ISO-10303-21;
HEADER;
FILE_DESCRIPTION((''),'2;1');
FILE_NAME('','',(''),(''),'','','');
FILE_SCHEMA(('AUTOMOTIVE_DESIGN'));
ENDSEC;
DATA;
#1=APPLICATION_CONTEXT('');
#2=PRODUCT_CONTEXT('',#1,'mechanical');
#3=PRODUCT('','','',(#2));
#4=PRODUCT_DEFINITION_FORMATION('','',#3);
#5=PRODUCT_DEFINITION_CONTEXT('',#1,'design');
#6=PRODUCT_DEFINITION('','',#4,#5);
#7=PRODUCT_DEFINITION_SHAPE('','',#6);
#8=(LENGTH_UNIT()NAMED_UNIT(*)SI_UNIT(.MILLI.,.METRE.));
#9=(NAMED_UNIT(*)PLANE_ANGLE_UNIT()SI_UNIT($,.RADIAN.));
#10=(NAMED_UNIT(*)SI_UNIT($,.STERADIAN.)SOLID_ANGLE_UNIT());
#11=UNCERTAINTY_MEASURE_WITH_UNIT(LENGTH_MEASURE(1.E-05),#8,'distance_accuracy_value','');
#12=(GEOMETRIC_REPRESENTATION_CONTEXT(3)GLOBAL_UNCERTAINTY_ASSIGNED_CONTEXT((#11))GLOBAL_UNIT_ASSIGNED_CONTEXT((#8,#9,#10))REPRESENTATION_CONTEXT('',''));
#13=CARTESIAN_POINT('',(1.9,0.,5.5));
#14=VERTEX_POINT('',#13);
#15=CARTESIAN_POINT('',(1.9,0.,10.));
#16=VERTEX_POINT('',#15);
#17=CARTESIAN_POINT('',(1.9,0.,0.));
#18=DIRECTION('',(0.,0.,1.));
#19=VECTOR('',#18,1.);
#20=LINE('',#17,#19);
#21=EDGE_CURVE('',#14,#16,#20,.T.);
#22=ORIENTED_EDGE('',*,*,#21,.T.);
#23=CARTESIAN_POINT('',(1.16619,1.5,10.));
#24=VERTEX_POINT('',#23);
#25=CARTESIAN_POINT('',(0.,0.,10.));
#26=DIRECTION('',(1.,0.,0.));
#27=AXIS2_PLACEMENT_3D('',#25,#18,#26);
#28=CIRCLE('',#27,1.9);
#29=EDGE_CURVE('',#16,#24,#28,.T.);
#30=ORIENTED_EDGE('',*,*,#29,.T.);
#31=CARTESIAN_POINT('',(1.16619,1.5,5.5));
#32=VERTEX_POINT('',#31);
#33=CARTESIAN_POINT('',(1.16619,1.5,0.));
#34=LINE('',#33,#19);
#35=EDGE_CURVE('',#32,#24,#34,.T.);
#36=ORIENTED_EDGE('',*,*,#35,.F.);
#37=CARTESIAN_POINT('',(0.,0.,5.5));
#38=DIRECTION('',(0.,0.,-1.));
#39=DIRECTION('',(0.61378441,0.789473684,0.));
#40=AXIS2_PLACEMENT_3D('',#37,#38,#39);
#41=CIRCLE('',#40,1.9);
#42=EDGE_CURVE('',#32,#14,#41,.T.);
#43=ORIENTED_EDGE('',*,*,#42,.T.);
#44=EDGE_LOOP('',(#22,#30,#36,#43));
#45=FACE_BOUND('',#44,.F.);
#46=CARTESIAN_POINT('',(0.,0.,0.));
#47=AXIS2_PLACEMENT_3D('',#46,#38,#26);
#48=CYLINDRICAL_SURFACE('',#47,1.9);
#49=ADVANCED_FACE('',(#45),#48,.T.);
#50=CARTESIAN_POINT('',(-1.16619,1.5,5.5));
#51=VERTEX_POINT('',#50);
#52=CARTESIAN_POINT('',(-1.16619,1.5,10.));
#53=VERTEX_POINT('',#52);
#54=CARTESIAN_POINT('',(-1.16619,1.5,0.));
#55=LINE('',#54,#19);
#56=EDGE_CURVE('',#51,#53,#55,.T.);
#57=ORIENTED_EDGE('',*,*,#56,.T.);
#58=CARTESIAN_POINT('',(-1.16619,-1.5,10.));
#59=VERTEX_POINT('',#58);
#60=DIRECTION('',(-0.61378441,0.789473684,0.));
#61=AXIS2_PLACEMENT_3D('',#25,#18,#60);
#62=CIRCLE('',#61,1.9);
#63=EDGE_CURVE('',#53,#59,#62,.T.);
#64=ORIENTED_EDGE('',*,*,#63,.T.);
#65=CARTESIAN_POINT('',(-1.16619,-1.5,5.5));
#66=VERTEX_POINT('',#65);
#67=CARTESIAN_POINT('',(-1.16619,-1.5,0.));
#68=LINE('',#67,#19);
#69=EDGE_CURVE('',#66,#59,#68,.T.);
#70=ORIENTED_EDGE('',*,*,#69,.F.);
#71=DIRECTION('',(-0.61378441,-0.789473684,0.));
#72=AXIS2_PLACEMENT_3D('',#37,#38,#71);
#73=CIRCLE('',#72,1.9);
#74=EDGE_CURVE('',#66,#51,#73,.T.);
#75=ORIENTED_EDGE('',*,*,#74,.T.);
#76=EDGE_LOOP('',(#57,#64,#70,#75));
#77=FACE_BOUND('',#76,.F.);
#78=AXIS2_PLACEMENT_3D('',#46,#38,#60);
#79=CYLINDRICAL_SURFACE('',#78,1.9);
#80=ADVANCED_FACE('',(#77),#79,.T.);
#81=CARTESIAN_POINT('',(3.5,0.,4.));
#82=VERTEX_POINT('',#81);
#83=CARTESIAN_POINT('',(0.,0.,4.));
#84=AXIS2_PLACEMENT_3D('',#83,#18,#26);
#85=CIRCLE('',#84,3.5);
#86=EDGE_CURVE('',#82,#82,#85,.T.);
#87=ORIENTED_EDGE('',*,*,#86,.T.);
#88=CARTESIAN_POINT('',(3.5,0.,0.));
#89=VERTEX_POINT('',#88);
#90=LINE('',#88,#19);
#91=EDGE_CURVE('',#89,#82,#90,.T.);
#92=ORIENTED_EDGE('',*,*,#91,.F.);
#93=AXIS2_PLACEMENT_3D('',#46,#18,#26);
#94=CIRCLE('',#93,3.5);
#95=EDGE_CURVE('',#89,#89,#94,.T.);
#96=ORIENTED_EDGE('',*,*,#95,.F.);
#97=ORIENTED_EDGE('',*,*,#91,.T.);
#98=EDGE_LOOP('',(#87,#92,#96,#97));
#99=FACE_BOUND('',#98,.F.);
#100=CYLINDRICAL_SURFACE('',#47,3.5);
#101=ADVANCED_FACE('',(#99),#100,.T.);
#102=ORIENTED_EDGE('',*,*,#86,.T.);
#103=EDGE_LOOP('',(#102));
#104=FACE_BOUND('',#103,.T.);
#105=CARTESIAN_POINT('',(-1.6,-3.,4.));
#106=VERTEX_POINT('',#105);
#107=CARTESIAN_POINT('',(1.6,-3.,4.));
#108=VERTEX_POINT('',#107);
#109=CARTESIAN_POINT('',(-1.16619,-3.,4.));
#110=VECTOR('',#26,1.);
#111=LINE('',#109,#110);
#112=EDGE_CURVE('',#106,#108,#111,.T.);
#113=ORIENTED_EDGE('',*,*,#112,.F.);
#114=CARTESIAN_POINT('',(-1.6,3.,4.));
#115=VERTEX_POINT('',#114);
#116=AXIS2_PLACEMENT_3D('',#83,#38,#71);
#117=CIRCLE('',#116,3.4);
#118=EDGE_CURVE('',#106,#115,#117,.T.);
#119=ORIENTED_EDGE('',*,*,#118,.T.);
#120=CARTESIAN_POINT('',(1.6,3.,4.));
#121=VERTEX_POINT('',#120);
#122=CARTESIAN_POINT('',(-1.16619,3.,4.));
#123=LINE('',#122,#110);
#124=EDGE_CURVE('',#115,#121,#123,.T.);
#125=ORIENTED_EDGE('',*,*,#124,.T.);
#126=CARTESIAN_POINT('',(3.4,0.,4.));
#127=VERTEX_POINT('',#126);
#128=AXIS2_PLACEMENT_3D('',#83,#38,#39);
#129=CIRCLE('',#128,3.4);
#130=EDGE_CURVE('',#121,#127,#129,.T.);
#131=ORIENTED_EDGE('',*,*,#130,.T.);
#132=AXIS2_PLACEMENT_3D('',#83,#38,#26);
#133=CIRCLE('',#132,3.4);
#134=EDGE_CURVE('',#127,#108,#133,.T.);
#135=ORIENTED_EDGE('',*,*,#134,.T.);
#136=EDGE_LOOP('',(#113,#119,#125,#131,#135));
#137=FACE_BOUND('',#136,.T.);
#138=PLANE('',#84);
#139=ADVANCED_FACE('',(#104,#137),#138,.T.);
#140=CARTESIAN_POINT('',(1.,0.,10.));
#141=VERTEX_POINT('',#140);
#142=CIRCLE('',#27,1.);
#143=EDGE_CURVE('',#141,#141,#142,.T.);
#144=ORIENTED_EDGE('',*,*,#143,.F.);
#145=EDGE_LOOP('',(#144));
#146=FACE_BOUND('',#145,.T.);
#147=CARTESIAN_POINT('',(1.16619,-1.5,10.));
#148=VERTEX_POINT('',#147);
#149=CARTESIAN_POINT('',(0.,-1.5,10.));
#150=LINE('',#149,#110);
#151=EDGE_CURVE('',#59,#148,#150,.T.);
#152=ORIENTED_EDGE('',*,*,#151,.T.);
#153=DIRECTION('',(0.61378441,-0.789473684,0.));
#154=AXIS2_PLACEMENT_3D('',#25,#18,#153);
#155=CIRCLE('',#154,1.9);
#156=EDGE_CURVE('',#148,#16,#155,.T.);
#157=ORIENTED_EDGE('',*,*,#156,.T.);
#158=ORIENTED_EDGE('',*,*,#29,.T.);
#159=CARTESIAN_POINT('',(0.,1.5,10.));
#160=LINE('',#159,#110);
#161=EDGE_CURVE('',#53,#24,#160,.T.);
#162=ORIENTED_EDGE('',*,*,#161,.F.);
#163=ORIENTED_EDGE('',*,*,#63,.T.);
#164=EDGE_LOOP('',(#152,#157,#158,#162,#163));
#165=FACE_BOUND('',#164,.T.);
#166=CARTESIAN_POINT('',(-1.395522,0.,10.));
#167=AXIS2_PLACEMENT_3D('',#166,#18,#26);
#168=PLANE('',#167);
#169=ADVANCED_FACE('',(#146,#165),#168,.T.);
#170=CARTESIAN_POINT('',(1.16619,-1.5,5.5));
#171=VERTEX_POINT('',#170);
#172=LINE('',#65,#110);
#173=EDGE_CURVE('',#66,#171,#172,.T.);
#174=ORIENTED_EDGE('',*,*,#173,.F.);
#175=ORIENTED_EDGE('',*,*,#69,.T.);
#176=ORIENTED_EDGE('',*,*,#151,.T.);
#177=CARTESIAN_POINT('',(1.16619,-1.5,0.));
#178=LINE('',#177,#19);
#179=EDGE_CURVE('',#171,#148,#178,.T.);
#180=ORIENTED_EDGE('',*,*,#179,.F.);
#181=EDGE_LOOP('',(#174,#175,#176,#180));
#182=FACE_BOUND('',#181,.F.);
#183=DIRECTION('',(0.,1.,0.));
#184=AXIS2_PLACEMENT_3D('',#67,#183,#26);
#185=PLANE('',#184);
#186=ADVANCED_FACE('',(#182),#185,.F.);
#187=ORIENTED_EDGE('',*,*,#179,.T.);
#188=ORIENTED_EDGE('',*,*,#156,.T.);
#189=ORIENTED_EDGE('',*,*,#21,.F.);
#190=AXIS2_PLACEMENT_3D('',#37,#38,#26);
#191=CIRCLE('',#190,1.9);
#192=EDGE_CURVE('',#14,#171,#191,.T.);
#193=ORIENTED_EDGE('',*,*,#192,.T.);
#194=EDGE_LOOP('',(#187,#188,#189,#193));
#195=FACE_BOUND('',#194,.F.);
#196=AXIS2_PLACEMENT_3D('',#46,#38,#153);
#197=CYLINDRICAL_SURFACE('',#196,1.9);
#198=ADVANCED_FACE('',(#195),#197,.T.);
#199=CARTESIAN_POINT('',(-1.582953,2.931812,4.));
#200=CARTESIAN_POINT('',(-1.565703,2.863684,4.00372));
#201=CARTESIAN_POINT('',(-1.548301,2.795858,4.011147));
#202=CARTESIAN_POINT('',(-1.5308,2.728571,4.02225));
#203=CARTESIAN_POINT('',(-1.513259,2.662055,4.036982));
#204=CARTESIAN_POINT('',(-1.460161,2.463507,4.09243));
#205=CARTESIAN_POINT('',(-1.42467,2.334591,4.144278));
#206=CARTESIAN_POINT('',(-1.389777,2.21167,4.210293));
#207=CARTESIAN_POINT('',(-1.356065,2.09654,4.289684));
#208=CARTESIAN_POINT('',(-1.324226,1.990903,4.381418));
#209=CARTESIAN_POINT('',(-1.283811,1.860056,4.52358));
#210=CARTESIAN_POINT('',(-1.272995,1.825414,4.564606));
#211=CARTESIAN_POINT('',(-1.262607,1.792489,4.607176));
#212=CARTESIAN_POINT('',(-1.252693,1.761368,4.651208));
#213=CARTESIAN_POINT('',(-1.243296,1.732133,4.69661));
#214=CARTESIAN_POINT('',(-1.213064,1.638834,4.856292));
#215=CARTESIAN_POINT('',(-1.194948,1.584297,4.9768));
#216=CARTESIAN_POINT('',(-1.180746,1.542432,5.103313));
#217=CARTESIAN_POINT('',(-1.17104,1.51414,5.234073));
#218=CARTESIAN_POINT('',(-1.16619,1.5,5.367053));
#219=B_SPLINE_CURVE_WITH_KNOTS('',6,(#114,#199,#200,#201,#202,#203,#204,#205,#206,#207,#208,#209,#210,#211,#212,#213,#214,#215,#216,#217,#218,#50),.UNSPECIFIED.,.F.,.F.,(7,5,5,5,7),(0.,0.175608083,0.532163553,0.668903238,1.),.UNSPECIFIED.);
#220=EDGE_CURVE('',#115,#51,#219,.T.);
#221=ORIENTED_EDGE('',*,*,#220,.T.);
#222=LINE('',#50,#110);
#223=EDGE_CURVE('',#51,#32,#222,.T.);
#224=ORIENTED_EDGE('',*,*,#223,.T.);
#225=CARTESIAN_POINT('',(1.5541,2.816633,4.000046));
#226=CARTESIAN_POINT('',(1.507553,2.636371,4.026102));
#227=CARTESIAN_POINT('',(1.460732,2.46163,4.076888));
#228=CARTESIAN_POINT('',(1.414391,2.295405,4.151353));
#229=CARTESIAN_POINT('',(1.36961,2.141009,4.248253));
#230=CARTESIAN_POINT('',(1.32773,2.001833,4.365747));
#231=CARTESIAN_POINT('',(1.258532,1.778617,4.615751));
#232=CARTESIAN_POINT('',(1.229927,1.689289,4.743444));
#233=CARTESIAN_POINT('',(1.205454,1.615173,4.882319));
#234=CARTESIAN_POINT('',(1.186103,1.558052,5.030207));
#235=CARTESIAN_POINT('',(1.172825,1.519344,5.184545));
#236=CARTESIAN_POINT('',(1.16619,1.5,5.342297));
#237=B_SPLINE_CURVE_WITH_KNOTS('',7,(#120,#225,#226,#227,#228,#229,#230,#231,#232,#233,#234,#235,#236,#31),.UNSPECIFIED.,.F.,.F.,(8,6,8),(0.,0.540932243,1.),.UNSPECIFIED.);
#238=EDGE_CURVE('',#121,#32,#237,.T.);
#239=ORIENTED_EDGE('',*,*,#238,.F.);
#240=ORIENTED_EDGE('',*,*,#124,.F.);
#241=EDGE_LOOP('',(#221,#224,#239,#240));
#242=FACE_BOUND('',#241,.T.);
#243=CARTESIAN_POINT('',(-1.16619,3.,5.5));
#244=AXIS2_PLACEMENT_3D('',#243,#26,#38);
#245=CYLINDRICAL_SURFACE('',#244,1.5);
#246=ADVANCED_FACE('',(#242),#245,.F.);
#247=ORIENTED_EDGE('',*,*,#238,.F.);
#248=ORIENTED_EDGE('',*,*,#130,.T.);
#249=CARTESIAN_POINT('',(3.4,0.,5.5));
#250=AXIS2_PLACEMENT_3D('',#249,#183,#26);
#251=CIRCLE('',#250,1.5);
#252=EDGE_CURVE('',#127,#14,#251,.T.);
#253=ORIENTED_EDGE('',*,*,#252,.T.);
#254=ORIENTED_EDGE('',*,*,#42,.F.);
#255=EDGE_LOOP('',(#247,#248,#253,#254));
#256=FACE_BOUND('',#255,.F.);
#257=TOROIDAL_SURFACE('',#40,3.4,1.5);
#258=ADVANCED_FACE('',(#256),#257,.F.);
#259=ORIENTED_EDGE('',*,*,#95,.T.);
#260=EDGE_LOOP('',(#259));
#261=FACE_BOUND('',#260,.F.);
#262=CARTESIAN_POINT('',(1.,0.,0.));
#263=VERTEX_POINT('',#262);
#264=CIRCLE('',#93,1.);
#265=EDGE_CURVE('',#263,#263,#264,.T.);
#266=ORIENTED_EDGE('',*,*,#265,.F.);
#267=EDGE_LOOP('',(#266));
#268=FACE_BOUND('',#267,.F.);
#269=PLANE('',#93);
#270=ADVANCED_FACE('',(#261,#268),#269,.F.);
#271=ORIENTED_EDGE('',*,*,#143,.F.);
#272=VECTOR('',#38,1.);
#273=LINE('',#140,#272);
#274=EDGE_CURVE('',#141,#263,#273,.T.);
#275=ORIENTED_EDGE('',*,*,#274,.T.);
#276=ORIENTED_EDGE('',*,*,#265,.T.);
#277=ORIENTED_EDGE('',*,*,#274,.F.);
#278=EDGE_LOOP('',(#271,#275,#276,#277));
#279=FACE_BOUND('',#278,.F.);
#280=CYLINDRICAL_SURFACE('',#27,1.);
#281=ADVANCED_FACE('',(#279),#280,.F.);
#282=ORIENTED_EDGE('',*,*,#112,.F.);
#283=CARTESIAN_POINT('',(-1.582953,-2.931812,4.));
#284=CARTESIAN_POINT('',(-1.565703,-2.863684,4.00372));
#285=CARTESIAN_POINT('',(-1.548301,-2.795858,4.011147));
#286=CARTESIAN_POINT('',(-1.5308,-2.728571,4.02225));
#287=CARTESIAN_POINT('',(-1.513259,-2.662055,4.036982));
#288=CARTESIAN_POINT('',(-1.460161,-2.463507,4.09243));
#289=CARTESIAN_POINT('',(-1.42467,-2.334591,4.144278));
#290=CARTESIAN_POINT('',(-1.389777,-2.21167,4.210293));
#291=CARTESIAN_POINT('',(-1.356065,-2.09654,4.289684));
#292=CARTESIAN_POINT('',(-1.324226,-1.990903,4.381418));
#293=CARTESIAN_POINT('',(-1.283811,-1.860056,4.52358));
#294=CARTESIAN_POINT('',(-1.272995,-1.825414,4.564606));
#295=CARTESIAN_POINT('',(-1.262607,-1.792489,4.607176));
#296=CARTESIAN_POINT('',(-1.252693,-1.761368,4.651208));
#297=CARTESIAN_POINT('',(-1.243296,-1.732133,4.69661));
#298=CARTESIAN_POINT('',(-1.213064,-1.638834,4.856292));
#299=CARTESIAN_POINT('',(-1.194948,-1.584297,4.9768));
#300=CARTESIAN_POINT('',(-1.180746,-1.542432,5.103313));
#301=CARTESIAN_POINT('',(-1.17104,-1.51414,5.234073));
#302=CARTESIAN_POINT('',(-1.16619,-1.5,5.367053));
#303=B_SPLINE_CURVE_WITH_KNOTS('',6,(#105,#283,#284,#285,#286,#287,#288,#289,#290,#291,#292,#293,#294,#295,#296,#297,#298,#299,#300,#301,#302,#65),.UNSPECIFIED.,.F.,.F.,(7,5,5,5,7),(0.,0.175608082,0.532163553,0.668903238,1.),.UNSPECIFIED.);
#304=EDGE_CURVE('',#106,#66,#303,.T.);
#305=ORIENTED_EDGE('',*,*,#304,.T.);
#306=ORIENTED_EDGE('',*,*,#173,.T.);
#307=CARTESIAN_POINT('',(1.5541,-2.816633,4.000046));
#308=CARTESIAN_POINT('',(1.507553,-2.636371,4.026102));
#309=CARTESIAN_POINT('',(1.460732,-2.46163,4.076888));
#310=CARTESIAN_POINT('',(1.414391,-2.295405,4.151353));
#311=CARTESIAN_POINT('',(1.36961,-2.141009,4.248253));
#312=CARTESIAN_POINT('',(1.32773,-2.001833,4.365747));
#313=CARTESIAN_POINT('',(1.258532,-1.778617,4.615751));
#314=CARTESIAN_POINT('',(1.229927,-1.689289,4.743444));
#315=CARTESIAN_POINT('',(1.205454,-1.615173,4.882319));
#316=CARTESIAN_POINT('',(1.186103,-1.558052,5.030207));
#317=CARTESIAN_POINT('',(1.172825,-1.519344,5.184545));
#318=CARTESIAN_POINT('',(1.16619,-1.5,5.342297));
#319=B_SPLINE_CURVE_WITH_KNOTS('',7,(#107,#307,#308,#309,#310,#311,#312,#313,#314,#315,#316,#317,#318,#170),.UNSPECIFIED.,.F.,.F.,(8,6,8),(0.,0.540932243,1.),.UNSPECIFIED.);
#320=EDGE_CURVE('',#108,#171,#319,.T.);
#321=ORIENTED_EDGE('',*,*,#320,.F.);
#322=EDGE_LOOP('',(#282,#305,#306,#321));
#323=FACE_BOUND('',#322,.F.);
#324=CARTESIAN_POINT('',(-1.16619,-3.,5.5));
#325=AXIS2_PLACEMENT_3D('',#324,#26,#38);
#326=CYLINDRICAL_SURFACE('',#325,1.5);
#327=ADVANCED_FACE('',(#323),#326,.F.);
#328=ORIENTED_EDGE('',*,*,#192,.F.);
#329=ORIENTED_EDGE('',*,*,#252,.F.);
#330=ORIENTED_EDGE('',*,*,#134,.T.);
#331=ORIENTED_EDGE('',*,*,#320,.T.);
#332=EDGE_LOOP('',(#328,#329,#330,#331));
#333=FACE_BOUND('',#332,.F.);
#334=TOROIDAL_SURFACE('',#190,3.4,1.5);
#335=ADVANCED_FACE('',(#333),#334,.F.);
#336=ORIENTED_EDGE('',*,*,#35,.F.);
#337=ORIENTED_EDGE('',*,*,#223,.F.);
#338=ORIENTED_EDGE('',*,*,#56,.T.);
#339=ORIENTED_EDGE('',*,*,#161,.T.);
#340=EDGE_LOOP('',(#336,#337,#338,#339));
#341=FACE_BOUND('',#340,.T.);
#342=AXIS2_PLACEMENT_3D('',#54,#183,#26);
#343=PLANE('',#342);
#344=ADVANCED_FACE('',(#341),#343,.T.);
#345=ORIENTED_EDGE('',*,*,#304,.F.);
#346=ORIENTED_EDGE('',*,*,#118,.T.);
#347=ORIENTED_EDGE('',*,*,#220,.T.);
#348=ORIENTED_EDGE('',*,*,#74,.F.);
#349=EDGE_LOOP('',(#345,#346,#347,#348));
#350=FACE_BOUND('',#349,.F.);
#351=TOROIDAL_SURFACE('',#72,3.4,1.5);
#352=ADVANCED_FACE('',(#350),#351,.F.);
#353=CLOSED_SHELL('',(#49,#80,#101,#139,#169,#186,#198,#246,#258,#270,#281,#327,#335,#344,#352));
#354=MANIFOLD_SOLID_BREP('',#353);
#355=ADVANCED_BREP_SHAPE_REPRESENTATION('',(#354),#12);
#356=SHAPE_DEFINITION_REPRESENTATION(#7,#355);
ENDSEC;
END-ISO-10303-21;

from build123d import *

# Parameters (mm, degrees)
F0_W     = 2.3323807579
F0_H     = 3
F1_DEPTH = 10
F2_R     = 3.5
F3_DEPTH = 4
F4_R     = 1.5
F5_R     = 1
F6_DEPTH = 25


with BuildPart() as f1:
    # F0 (on Top) → F1 (new body)
    with BuildSketch(Plane.XY):
        with BuildLine():
            Line((-1.166190379, -1.5), (-1.166190379, 1.5))
            ThreePointArc((-1.166190379, 1.5), (-1.9, 0), (-1.166190379, -1.5))
        make_face()
        with BuildLine():
            ThreePointArc((1.166190379, -1.5), (1.7067163971, -0.8349366084), (1.9, 0))
            ThreePointArc((1.9, 0), (1.7067163971, 0.8349366084), (1.166190379, 1.5))
            Line((1.166190379, 1.5), (1.166190379, -1.5))
        make_face()
        Rectangle(F0_W, F0_H)
    extrude(amount=F1_DEPTH)

    # F2 (on Top) → F3 (join)
    with BuildSketch(Plane.XY):
        Circle(F2_R)
    extrude(amount=F3_DEPTH)

    # F4
    f4_edges = [f1.edges().sort_by_distance(p)[0] for p in [
        (-1.9, 0, 4),
        (0, 1.5, 4),
        (0, -1.5, 4),
        (1.9, 0, 4),
    ]]
    fillet(f4_edges, radius=F4_R)

    # F5 (on face) → F6 (cut)
    with BuildSketch(Plane.XY.offset(10)):
        Circle(F5_R)
    extrude(amount=-F6_DEPTH, mode=Mode.SUBTRACT)


solid = f1.part
